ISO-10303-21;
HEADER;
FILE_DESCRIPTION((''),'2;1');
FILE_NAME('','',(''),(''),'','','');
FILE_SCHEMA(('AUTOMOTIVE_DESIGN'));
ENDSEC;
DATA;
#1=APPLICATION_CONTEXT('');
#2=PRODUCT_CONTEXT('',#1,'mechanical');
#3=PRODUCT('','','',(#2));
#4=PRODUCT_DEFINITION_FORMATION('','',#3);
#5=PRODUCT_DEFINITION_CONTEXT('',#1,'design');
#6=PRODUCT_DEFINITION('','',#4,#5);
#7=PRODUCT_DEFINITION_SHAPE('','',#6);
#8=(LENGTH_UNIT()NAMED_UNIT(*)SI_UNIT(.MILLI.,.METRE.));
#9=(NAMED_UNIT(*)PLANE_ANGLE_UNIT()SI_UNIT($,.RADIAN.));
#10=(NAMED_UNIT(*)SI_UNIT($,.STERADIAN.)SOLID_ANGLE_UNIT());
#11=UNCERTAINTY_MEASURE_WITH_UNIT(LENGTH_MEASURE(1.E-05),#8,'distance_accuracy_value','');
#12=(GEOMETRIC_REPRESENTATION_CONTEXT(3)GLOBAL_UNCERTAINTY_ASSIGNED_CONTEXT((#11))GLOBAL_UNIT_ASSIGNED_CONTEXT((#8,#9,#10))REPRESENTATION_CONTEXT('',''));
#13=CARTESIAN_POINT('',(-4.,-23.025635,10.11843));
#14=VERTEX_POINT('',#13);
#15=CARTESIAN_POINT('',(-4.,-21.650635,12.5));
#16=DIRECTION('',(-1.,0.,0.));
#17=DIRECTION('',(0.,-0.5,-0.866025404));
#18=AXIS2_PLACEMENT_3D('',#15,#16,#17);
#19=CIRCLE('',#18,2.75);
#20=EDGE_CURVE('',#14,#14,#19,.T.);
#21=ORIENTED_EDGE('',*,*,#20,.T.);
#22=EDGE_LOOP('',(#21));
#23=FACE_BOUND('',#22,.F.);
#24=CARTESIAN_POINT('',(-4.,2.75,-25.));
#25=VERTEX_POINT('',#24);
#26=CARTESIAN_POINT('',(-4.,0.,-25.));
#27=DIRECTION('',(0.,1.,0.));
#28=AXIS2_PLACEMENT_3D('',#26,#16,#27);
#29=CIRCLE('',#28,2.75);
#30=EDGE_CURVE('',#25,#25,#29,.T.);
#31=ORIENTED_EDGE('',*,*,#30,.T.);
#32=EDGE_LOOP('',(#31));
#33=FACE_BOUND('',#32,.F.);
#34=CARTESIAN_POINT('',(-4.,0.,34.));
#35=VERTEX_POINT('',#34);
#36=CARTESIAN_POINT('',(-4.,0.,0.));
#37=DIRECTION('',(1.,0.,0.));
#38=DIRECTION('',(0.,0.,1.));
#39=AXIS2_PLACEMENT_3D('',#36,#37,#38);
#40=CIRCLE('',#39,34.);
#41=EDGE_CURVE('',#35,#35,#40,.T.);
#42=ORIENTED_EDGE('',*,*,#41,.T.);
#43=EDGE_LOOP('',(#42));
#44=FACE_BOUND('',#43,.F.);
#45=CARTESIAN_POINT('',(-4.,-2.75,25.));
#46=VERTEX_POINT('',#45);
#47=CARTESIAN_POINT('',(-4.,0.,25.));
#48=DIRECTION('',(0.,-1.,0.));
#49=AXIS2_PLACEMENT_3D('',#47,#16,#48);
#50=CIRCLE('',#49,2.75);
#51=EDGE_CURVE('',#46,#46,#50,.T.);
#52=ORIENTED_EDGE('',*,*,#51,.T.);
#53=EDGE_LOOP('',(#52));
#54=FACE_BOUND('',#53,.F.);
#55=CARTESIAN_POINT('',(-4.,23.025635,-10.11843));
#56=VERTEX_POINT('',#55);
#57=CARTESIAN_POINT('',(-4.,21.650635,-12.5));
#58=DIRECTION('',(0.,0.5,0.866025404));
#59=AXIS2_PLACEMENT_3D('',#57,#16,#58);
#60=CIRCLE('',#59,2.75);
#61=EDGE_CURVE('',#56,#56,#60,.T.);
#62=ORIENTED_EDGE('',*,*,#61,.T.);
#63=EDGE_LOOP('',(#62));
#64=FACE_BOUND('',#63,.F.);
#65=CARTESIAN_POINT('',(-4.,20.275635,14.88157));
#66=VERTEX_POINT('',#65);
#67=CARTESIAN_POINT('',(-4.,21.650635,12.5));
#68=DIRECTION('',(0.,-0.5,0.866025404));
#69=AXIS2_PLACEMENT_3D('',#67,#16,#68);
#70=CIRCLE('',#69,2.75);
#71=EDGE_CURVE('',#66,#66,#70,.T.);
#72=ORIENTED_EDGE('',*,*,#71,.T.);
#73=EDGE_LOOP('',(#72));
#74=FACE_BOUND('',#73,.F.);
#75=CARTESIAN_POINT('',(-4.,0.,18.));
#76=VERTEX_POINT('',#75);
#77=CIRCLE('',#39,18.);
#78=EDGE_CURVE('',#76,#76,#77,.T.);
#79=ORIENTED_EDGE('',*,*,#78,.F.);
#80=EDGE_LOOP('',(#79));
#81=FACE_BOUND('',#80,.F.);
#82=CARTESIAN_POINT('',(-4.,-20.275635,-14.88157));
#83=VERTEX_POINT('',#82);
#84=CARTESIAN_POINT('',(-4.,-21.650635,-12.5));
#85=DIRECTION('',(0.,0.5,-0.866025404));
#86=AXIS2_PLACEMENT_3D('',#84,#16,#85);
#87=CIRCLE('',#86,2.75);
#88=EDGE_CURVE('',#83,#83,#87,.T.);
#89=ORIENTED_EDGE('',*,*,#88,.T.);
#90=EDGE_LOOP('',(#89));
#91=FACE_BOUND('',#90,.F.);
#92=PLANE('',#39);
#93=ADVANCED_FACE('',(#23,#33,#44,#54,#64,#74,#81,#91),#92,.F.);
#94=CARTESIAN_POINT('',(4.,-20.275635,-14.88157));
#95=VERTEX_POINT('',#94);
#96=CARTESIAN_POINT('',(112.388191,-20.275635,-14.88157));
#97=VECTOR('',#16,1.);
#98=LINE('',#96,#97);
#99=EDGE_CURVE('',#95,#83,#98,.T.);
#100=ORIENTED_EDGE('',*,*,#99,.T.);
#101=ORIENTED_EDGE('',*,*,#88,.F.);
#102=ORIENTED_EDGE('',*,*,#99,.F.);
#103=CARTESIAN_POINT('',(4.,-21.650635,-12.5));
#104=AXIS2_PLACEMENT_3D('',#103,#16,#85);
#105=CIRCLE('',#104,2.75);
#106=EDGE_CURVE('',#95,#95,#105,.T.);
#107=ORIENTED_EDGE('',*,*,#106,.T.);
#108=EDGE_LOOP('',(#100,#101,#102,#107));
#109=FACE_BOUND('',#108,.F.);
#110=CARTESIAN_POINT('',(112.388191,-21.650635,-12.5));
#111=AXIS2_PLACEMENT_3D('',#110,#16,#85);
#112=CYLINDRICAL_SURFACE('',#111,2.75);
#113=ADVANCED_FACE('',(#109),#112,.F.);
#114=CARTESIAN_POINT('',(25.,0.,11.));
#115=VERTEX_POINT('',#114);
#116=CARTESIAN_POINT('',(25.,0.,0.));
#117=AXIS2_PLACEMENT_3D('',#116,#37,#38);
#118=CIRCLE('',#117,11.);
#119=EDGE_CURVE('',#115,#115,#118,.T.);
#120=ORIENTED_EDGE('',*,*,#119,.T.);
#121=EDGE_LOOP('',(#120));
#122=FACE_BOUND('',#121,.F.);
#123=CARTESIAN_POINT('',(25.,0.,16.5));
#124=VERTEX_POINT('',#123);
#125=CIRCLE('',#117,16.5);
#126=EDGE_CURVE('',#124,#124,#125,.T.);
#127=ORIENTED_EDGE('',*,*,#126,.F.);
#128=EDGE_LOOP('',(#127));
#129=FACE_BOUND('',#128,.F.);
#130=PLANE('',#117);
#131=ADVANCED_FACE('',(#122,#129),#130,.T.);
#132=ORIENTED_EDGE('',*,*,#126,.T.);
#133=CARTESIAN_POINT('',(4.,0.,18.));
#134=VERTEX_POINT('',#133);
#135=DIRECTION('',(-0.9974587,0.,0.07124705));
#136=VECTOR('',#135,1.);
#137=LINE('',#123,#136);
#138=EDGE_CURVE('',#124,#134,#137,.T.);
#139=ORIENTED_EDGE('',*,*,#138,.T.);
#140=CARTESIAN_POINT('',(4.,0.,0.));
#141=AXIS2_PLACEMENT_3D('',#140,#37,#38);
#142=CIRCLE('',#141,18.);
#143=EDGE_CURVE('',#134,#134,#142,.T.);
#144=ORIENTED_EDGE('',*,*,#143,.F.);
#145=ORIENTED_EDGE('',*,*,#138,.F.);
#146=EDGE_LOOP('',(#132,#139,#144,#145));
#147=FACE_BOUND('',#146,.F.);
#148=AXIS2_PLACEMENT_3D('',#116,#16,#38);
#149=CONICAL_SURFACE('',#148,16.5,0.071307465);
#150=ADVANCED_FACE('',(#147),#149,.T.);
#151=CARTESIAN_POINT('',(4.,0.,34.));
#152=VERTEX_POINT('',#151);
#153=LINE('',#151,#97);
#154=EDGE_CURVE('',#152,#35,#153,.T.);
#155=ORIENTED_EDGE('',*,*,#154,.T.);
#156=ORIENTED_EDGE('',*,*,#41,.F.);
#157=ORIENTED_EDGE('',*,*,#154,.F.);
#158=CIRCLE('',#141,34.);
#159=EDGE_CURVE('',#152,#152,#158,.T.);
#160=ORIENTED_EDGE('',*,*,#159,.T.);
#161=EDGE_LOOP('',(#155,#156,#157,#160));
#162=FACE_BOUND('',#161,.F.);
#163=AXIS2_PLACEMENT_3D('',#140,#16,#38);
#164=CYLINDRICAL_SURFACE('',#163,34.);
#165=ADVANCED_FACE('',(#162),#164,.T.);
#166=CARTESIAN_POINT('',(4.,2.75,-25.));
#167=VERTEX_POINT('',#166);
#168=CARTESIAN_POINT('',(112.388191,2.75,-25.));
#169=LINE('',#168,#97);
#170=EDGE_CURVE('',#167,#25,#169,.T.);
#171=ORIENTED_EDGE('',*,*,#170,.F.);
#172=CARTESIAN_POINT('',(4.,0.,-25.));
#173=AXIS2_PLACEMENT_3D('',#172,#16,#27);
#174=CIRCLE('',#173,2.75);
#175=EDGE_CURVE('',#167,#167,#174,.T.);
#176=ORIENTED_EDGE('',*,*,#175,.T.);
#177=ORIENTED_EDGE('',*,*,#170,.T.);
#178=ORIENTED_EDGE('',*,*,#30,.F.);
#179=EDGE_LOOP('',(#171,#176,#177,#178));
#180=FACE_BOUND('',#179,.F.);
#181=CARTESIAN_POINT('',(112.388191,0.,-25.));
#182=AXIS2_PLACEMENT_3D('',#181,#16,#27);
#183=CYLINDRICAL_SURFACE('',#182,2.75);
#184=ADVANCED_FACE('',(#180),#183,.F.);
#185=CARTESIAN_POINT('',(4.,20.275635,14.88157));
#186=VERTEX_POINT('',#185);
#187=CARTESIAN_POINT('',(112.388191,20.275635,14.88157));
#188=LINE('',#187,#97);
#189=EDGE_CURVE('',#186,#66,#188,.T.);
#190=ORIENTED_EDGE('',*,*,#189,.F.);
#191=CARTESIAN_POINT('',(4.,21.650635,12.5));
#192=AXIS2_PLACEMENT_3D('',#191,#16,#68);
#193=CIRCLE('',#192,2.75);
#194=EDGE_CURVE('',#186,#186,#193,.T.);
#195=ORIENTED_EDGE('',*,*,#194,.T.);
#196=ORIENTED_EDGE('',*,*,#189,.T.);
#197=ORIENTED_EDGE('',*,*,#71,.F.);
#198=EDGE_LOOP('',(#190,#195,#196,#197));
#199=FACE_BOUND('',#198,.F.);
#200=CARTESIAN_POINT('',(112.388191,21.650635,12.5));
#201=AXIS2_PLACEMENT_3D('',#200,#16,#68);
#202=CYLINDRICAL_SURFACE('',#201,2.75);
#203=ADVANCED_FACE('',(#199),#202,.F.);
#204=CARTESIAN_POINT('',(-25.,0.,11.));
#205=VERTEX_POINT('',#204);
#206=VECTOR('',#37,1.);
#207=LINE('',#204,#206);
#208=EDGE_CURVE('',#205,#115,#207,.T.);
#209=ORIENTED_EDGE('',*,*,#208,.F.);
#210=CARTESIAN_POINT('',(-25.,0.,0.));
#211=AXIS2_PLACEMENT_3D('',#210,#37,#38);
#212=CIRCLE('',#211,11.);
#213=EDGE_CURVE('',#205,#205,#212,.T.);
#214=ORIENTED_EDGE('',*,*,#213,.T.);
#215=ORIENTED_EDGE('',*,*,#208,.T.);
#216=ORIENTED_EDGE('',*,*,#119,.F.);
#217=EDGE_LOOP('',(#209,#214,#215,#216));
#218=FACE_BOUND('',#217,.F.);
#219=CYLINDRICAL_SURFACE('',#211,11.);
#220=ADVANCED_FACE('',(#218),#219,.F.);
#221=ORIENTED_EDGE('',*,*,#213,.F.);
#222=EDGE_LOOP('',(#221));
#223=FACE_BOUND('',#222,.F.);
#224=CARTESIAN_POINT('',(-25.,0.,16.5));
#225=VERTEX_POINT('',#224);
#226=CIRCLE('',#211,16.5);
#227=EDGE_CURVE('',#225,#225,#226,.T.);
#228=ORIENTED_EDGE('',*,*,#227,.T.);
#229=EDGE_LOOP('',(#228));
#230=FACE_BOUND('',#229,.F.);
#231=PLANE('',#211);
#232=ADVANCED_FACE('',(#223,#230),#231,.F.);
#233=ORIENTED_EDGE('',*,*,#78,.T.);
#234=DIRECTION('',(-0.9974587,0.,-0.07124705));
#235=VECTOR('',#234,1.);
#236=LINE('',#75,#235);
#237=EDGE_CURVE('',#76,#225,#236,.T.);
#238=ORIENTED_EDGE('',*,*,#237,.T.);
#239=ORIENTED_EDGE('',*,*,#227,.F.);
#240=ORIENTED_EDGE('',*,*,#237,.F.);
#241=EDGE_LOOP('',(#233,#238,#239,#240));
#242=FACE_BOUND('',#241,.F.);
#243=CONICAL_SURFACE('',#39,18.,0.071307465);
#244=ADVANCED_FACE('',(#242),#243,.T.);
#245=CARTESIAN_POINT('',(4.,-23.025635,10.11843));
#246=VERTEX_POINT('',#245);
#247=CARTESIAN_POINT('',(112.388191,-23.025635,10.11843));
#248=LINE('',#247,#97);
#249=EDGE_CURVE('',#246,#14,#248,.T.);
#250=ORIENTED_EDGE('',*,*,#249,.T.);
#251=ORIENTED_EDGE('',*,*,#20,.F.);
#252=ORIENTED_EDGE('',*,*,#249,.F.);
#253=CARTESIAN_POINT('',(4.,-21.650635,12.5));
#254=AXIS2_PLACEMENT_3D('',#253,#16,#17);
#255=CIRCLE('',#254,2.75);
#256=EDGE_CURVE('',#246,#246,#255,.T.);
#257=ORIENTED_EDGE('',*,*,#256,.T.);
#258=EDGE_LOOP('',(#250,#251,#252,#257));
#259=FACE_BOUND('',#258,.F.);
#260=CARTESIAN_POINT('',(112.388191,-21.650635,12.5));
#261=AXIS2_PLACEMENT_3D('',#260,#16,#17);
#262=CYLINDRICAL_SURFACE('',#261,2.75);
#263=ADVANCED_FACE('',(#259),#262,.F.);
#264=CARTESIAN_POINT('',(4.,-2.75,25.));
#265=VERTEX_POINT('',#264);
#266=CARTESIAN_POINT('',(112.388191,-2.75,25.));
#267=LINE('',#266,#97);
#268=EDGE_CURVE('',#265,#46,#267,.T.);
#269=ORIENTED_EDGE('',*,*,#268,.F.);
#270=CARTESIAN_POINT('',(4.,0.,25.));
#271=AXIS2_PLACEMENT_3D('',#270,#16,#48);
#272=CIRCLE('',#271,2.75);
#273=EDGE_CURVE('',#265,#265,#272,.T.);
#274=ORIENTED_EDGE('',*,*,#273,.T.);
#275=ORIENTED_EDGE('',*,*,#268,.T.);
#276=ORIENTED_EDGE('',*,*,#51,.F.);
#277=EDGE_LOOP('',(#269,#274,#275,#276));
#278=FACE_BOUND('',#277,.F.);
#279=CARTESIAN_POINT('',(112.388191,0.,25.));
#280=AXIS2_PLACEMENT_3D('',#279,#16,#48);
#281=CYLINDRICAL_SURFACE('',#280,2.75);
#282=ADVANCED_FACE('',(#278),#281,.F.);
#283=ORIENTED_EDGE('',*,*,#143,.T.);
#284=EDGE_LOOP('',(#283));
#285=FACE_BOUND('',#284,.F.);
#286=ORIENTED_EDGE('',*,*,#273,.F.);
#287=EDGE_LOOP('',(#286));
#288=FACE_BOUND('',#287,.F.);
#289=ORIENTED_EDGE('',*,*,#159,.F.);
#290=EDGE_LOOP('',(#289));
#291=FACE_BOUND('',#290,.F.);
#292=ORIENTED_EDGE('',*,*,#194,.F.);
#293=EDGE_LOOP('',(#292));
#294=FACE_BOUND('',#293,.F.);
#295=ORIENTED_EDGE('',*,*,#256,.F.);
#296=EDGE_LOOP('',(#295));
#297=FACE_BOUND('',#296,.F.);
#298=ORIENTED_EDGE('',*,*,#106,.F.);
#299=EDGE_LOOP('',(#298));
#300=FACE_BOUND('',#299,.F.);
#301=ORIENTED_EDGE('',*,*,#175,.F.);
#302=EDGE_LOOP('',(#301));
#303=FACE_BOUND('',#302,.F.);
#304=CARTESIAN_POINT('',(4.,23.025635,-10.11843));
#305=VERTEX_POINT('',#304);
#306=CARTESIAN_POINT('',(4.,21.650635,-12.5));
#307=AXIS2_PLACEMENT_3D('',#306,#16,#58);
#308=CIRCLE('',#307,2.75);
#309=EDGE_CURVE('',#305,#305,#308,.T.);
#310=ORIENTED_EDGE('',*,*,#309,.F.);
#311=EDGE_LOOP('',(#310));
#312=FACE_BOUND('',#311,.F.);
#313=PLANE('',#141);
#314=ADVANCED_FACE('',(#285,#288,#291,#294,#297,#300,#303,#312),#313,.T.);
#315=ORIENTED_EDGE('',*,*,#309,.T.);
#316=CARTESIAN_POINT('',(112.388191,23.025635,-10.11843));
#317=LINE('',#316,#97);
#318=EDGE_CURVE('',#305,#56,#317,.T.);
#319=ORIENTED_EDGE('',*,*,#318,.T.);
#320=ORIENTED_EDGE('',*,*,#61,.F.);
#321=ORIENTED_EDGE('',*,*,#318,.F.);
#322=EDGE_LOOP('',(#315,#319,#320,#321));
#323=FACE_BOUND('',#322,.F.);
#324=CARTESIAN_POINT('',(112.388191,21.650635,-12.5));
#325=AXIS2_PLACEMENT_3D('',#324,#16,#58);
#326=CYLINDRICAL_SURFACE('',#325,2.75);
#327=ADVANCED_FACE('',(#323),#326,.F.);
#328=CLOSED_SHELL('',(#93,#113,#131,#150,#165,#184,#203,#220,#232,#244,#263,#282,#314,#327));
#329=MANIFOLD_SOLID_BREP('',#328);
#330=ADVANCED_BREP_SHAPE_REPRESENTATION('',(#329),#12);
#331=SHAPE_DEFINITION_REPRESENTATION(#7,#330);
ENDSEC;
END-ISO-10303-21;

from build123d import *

# Parameters (mm, degrees)
F3_D            = 5.5
F3_COPIES_COUNT = 6


# Not quite as in the source:
# - a pattern or mirror of a feature is missing from the dataset's text; its kind, count and spacing are read off the source's solid


with BuildPart() as f1:
    # F0 (on Front) → F1 (revolve)
    with BuildSketch(Plane.XZ):
        Polygon((-25, 16.5), (-25, 11), (25, 11), (25, 16.5), (4, 18), (4, 34), (-4, 34), (-4, 18), align=None)
    revolve(axis=Axis((-2.8921069455, 0, 0), (1, 0, 0)))

    # F3 (through all)
    with Locations(Plane.YZ.offset(4)):
        with Locations((0, 25)):
            f3 = Hole(F3_D / 2)

    # F3_copies: F3 ×6 about axis
    f3_copies_axis = Axis((0, 0, 0), (1, 0, 0))
    for i in range(1, F3_COPIES_COUNT):
        add(f3.rotate(f3_copies_axis, i * 360 / F3_COPIES_COUNT), mode=Mode.SUBTRACT)


solid = f1.part
